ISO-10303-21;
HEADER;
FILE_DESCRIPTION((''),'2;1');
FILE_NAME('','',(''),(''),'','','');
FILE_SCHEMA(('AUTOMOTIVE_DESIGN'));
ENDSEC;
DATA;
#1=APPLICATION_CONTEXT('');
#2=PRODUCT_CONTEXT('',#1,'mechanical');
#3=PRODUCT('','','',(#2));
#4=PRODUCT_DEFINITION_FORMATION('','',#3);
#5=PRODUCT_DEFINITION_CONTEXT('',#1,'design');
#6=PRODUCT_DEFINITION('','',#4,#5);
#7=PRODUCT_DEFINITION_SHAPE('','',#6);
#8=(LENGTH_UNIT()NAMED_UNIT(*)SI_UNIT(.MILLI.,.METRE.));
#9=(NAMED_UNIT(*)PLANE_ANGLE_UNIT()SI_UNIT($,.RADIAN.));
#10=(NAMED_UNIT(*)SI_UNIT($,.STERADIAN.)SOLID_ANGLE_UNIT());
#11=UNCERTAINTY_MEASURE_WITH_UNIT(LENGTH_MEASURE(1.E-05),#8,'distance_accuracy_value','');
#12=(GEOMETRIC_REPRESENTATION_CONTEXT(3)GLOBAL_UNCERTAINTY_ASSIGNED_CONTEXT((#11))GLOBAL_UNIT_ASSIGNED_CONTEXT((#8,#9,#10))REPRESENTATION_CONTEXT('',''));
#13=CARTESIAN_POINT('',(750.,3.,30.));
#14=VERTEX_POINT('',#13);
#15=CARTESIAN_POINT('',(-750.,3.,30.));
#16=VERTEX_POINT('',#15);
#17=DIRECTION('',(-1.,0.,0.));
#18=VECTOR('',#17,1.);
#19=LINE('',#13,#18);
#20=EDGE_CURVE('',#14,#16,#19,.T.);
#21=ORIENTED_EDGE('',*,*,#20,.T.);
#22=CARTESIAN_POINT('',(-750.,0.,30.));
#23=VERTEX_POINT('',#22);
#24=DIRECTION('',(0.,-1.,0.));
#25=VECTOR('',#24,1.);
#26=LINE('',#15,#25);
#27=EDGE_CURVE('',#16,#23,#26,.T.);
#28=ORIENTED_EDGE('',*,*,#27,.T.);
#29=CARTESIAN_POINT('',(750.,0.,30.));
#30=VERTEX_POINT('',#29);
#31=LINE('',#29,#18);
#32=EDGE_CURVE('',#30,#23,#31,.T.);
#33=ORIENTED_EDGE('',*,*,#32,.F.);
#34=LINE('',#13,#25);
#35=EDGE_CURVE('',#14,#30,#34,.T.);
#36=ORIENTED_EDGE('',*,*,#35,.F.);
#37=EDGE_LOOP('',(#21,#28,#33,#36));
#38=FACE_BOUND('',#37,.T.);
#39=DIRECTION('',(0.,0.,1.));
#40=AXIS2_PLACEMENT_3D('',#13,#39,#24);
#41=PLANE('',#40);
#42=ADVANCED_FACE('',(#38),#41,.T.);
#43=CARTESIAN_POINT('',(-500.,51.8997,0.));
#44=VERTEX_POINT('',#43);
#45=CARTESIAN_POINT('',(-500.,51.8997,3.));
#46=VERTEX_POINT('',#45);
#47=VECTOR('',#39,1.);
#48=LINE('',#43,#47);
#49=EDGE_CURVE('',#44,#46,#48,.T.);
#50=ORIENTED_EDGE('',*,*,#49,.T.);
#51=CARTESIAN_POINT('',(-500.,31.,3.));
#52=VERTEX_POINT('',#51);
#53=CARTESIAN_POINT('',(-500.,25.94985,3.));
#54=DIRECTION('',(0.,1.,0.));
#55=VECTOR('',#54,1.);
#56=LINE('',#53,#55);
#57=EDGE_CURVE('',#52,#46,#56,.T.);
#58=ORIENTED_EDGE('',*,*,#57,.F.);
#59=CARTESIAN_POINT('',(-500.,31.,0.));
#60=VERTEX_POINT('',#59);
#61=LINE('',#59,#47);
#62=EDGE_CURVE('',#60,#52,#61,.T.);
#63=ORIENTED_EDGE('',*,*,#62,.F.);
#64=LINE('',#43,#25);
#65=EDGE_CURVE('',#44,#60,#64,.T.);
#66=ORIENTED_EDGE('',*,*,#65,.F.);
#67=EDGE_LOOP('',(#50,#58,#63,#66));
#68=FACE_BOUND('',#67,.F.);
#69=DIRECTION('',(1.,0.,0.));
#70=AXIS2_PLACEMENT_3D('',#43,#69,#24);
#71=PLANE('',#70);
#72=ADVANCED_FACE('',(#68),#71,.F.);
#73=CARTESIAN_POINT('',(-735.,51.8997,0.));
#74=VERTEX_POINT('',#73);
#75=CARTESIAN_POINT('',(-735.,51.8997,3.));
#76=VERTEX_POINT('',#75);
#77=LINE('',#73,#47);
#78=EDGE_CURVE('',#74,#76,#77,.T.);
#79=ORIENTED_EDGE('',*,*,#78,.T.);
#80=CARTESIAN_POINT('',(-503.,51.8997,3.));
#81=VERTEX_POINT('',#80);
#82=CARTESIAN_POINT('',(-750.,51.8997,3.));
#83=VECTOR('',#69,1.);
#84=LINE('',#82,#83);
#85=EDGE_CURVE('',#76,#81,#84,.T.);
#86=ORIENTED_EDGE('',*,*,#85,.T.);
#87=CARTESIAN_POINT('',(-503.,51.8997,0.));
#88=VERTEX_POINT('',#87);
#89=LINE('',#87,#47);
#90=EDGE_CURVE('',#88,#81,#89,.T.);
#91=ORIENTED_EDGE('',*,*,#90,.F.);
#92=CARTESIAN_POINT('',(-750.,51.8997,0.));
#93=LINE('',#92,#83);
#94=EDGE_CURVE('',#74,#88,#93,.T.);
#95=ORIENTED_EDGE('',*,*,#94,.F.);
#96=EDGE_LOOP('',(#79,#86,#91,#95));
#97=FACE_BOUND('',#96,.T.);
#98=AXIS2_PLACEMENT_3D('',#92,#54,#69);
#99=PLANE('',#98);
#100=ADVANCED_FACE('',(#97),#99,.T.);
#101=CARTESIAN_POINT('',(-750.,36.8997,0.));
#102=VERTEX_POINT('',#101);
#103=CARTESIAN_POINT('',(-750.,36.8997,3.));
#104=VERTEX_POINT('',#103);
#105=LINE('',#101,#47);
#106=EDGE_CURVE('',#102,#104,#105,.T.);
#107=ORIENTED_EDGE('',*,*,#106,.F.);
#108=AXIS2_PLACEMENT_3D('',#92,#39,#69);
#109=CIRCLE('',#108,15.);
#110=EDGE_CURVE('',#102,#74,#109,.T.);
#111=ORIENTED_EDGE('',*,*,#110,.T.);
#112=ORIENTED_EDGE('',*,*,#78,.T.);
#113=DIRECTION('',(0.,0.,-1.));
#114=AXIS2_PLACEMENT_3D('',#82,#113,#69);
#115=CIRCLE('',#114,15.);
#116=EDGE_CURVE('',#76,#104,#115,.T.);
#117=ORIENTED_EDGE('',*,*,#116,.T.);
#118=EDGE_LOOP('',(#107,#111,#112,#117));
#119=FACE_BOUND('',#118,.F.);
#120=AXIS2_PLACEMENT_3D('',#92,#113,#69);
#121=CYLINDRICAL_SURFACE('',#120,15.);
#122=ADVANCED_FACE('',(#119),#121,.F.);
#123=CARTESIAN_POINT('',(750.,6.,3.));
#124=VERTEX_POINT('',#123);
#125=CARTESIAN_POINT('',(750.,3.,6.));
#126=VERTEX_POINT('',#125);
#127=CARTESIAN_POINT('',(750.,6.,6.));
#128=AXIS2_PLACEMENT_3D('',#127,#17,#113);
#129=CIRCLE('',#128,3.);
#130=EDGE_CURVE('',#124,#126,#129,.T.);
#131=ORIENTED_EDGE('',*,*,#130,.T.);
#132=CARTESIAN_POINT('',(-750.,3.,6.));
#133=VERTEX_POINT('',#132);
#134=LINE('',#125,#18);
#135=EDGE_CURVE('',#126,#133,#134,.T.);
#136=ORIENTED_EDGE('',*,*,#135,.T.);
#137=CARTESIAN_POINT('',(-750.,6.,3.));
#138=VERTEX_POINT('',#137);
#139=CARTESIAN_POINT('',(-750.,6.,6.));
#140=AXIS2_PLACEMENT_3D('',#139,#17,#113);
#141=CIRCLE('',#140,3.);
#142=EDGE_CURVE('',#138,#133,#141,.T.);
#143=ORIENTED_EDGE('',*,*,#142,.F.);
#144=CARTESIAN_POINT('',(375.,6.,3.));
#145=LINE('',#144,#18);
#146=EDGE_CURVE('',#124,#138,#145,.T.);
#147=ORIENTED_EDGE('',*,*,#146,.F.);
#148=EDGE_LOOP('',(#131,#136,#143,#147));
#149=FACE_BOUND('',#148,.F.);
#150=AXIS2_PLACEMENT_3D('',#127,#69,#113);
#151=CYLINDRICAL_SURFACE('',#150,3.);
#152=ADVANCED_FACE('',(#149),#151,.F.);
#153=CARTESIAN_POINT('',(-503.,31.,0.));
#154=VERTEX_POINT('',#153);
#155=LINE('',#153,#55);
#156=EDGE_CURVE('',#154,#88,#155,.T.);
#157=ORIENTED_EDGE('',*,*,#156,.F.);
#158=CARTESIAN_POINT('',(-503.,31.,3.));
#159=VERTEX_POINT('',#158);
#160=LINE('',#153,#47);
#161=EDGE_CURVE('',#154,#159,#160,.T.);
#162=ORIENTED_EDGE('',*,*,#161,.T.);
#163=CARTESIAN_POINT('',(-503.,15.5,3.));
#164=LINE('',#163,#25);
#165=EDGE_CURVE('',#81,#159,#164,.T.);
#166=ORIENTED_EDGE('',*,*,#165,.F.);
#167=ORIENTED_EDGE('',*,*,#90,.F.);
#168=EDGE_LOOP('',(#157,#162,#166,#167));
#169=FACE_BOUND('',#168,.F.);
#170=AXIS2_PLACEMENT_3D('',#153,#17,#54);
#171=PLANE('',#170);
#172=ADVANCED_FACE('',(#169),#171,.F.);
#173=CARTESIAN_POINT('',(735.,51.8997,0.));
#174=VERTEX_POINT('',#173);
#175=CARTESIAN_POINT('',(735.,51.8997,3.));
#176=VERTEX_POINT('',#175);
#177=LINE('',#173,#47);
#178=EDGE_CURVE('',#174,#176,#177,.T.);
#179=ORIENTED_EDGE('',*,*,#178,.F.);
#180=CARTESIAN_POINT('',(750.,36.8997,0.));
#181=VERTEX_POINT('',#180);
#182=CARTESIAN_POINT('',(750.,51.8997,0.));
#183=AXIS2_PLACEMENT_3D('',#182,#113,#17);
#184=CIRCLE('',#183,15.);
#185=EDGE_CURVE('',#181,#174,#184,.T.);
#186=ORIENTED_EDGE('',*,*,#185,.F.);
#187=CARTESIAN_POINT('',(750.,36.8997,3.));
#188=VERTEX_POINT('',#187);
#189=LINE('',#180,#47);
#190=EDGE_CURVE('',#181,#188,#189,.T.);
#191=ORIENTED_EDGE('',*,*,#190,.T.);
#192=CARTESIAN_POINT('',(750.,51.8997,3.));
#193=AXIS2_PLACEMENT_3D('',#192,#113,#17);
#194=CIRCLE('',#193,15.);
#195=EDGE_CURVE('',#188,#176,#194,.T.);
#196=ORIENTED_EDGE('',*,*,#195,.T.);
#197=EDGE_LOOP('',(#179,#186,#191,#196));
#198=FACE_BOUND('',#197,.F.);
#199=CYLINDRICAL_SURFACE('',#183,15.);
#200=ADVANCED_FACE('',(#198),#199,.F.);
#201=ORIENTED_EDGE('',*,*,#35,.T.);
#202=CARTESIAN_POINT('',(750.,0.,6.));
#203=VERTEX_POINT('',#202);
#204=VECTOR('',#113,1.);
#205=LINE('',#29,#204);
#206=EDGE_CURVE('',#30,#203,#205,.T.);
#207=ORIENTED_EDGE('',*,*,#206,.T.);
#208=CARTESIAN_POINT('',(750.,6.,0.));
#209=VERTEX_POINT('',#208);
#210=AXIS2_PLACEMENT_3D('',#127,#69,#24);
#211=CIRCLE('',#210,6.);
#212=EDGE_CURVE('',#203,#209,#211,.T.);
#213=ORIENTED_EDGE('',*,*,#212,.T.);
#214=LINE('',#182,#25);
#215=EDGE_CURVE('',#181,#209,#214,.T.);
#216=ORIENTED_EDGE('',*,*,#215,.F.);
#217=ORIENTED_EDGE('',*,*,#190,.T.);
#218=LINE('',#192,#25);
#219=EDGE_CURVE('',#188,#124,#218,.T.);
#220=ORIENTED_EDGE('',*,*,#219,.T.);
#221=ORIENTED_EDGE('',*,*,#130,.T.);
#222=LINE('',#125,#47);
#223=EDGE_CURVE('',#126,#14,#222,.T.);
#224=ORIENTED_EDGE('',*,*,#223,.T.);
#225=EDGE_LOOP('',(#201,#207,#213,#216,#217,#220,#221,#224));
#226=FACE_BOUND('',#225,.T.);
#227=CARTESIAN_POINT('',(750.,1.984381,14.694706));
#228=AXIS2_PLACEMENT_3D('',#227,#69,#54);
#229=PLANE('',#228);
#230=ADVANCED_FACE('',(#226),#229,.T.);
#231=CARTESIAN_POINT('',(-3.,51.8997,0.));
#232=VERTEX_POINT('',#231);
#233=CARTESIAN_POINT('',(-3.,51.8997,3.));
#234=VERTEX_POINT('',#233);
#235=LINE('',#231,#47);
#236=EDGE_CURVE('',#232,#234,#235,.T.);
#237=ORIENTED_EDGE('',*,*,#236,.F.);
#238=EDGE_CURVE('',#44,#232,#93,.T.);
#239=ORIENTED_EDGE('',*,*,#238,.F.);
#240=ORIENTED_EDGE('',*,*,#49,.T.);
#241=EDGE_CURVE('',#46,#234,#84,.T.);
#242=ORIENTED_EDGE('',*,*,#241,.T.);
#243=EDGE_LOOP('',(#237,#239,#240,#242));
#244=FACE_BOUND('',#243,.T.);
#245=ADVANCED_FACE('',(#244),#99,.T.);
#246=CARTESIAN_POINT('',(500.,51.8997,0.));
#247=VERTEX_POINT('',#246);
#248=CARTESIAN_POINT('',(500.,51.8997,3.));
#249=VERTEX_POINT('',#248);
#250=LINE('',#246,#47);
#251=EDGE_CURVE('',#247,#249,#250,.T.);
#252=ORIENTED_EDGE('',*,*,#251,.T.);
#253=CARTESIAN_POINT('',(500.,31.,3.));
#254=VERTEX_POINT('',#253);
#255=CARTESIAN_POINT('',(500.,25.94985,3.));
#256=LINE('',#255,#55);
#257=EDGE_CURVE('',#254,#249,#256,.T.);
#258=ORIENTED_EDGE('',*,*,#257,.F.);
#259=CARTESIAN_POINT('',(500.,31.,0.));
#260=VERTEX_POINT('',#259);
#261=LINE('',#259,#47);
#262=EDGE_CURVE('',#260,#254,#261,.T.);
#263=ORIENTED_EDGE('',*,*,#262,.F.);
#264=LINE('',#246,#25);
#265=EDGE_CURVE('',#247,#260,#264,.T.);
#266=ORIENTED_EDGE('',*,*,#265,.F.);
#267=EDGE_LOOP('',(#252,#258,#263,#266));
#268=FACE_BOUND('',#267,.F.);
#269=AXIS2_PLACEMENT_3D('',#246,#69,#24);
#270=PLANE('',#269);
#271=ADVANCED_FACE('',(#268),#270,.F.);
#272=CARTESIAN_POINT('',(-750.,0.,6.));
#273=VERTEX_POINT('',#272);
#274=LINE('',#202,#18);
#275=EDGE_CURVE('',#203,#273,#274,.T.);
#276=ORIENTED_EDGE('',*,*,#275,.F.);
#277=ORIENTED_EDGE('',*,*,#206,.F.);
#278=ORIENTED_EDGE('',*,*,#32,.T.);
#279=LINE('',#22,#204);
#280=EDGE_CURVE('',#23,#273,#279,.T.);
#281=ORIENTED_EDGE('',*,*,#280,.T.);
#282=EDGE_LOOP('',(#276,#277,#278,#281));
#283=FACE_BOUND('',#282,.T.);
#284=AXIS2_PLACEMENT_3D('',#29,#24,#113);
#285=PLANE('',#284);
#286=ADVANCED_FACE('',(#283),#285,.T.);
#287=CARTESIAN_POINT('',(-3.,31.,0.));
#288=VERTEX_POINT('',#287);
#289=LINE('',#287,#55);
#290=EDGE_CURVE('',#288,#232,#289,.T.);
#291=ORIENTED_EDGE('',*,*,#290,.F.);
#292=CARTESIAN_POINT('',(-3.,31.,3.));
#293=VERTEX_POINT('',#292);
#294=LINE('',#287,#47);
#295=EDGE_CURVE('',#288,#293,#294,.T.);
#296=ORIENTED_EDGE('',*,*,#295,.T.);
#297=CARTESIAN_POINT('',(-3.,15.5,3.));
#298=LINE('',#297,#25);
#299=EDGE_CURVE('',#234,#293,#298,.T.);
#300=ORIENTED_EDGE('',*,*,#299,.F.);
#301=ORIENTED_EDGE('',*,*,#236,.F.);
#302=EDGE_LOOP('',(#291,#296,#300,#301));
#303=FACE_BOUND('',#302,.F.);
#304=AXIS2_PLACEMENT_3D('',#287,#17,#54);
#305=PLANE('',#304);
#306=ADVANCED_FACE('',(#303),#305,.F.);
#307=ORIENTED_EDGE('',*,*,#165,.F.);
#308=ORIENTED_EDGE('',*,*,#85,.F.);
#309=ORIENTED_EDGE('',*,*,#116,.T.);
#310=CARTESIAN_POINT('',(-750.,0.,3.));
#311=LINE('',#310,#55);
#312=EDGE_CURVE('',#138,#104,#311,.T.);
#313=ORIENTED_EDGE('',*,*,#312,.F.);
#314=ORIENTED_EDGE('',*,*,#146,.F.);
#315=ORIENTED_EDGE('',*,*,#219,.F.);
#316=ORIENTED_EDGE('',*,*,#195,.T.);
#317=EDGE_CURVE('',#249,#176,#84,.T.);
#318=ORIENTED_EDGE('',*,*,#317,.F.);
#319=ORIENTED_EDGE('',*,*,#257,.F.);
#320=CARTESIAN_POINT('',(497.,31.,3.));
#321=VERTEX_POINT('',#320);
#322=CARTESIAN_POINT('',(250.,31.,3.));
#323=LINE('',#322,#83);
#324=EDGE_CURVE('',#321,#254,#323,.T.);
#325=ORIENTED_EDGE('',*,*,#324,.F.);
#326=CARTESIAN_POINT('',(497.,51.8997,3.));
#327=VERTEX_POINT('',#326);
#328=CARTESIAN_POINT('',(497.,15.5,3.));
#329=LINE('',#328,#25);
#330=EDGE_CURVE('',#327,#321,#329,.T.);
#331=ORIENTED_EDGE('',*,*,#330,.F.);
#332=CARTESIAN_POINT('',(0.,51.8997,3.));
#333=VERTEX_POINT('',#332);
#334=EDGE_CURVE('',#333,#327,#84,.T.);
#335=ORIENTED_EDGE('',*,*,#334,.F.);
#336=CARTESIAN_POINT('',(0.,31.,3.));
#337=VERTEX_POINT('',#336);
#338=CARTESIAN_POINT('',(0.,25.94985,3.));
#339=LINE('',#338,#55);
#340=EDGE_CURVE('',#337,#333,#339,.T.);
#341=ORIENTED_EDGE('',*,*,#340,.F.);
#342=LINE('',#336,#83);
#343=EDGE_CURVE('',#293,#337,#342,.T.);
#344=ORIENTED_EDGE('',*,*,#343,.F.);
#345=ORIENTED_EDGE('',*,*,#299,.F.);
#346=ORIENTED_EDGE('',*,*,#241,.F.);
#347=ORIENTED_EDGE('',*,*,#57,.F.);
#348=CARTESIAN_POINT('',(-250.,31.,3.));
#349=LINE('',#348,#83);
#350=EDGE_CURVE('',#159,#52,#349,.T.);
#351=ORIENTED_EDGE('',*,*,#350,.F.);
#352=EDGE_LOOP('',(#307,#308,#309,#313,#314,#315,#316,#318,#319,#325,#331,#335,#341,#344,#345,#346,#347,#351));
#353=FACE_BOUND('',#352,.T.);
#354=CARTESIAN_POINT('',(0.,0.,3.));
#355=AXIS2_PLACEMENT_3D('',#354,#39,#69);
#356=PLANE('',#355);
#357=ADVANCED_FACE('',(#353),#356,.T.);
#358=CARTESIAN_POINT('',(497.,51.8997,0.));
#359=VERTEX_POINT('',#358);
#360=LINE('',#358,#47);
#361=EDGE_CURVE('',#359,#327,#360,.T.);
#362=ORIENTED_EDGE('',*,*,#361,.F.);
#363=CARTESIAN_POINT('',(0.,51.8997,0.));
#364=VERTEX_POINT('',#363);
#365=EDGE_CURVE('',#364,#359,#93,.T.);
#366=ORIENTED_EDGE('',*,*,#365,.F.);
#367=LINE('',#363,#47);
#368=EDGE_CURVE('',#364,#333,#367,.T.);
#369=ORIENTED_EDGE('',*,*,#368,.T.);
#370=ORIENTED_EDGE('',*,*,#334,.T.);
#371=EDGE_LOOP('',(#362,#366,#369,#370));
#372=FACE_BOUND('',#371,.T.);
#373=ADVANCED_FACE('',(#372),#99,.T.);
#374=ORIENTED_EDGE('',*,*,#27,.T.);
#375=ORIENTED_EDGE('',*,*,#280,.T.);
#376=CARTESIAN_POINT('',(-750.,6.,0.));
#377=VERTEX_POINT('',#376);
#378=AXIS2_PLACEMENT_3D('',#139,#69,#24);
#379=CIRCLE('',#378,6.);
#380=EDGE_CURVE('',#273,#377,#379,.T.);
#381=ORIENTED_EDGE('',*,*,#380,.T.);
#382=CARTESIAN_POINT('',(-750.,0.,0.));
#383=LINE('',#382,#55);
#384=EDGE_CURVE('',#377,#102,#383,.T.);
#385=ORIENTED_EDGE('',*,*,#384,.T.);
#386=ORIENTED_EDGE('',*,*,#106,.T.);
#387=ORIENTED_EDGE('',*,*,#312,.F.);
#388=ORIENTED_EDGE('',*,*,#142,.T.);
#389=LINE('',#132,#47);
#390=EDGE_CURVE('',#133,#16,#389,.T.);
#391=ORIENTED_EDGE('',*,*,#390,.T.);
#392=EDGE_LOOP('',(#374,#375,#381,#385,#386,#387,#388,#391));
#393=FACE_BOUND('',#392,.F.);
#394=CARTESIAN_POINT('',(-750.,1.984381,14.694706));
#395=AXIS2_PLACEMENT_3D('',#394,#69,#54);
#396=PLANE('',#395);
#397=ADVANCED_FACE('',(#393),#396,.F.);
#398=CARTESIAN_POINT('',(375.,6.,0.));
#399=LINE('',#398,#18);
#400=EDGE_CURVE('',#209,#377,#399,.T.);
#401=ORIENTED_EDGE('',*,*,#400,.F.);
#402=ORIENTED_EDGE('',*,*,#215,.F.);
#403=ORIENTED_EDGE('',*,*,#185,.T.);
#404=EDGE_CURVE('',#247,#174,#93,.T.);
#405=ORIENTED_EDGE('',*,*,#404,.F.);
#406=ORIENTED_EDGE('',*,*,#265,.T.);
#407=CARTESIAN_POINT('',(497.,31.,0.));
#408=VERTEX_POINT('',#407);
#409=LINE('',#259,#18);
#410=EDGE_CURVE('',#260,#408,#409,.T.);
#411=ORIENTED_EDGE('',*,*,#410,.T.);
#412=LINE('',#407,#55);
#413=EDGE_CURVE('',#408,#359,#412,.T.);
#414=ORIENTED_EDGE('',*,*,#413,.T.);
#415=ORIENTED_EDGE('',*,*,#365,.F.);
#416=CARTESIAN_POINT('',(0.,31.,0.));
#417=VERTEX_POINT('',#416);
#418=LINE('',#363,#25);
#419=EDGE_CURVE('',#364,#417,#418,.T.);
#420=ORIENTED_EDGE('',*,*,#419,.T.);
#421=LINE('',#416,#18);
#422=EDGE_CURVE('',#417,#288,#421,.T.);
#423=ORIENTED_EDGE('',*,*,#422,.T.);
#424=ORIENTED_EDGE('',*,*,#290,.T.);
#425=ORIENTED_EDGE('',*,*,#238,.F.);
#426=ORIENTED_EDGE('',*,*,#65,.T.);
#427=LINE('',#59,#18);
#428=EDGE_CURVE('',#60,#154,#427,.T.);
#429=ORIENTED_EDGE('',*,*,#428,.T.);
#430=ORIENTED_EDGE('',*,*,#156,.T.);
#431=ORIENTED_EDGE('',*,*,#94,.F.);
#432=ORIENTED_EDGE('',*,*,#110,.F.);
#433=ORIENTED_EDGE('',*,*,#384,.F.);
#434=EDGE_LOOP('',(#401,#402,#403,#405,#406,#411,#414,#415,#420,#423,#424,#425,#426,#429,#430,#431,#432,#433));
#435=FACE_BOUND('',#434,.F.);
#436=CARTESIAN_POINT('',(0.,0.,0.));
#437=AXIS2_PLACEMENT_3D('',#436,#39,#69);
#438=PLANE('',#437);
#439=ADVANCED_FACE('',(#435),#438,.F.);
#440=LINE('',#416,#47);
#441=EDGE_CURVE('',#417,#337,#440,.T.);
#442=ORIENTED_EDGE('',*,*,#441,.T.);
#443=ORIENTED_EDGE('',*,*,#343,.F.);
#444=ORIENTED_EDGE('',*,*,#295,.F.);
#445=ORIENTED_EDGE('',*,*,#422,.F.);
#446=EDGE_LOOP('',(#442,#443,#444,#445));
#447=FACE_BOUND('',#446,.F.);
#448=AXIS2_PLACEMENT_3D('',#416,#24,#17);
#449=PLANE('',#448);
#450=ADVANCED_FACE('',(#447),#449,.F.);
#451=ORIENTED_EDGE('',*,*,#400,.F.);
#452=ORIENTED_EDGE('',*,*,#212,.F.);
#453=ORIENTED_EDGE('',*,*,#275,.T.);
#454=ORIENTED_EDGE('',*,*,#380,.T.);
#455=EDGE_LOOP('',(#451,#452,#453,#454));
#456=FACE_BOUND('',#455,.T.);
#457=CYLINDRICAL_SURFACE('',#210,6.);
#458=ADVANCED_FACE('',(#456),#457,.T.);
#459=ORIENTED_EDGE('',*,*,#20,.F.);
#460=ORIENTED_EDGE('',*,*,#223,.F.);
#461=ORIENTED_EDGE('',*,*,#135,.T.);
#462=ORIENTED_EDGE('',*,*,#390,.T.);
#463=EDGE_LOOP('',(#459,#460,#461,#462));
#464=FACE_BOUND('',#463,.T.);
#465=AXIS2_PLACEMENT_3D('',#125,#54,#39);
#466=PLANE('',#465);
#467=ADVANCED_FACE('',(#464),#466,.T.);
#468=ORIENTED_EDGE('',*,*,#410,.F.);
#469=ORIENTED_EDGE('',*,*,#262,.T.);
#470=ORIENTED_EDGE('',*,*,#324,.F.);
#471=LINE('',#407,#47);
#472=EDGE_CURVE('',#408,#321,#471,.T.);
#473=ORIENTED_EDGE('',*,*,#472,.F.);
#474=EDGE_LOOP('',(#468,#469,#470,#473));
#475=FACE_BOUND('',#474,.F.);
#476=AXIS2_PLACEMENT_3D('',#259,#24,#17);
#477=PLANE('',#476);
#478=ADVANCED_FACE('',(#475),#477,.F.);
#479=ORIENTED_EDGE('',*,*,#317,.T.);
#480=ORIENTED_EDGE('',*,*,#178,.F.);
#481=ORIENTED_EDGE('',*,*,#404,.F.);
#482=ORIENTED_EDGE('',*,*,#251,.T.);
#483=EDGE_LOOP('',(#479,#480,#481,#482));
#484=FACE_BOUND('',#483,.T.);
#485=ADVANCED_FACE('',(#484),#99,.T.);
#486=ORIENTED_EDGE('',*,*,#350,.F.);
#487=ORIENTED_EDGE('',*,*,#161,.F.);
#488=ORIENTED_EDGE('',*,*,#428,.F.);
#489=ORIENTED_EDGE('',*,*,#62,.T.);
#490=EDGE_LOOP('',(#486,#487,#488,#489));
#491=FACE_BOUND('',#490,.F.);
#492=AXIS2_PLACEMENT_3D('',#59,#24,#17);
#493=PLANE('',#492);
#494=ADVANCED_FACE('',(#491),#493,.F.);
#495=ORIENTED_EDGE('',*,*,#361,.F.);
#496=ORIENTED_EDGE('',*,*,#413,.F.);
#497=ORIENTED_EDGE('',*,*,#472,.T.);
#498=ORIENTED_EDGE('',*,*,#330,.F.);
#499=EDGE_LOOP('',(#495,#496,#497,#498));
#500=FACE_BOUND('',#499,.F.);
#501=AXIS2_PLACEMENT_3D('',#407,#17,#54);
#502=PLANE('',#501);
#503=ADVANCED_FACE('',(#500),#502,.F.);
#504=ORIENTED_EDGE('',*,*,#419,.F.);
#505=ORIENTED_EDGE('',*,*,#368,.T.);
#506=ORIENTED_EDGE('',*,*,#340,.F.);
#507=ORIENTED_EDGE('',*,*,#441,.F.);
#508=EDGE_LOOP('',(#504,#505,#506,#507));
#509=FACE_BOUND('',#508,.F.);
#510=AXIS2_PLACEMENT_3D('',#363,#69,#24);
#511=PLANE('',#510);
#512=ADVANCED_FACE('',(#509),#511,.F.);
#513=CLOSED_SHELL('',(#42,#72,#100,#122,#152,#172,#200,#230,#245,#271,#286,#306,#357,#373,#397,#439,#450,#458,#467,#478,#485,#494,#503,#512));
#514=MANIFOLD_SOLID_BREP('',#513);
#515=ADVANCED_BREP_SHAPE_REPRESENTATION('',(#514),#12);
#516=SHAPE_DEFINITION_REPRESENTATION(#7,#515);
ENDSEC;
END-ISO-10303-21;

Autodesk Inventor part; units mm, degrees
ref_plane "YZ Plane" through (0, 0, 0) normal (1, 0, 0) x (0, 1, 0)
ref_plane "XZ Plane" through (0, 0, 0) normal (0, 1, 0) x (-1, 0, 0)
ref_plane "XY Plane" through (0, 0, 0) normal (0, 0, 1) x (1, 0, 0)
sketch "Sketch1" plane through (0, 0, 0) normal (0, 0, 1) x (1, 0, 0)
  line L0 (-750, 51.8997) -> (750, 51.8997)
  line L1 (750, 51.8997) -> (750, 0)
  line L2 (750, 0) -> (-750, 0)
  line L3 (-750, 0) -> (-750, 51.8997)
  point P0 (0, 0)
  point P1 (0, 0)
  dimension "d0" = 1500
  dimension "d1" = 51.8997
extrude "Plate1" add sketch "Sketch1" along normal blind 3
sketch "Sketch2" plane through (750, 3, 0) normal (0, -1, 0) x (1, 0, 0)
  line L0 (-1500, 0) -> (0, 0)
  line L1 (0, 0) -> (0, 30)
  line L2 (0, 30) -> (-1500, 30)
  line L3 (-1500, 30) -> (-1500, 0)
edge flange "Flange1" height 30 angle 90 thickness 3 bend radius 3 thickness toward (0, -1, 0) relief tear relief width 3 relief depth 1.5 edges at (0, 0, 3) wall of the first edge with corners at (-750, 3, 0) (750, 3, 0) (750, 3, 30) (-750, 3, 30)
bend "Bend1"
corner "Corner1"
sketch "Sketch5" plane through (0, 0, 0) normal (0, 0, -1) x (-1, 0, 0)
  line L0 (750, 51.8997) -> (-750, 51.8997) projected
  line L1 (500, 51.8997) -> (500, 31)
  line L2 (500, 31) -> (503, 31)
  line L3 (503, 31) -> (503, 51.8997)
  line L4 (750, 0) -> (-750, 0) projected
  point P0 (0, 0)
  dimension "d18" = 3
  dimension "d19" = 247
  dimension "d20" = 31
extrude "Extrusion1" cut sketch "Sketch5" against normal through all
pattern_linear "Rectangular Pattern1" count 3 spacing 500 along (1, 0, 0) of "Extrusion1"
sketch "Sketch6" plane through (0, 0, 0) normal (0, 0, -1) x (-1, 0, 0)
  line L0 (-750, 51.8997) -> (-750, 6) projected
  circle A0 centre (-750, 51.8997) radius 15
  line L1 (-750, 51.8997) -> (-500, 51.8997) projected
  point P0 (0, 0)
  point P1 (-735, 51.8997)
  point P2 (-750, 36.8997)
  dimension "d24" = 30
extrude "Extrusion2" cut sketch "Sketch6" against normal through all contours L1 A0 L0 picked at (-740.1254, 50.7871)
mirror "Mirror1" about plane through (0, 0, 0) normal (1, 0, 0) of "Extrusion2"
equation "\"d1\" = Стрингер_5"
equation "\"d18\" = Thickness"
equation "\"d2\" = Thickness"
equation "\"d3\" = BendReliefWidth"
equation "\"d4\" = BendReliefDepth"
equation "\"d5\" = MinimumRemnant"
equation "\"d6\" = TransitionRadius"
equation "\"d9\" = BendRadius"
equation "\"d10\" = CornerReliefSize"
equation "\"d11\" = GapSize"
equation "\"d12\" = JacobiRadiusSize"
equation "\"BendRadius\" = Thickness"
equation "\"BendReliefWidth\" = Thickness"
equation "\"BendReliefDepth\" = 0.5 * Thickness"
equation "\"CornerReliefSize\" = 4 * Thickness"
equation "\"MinimumRemnant\" = 2 * Thickness"
equation "\"TransitionRadius\" = BendRadius"
equation "\"JacobiRadiusSize\" = BendRadius"
equation "\"GapSize\" = Thickness"
equation "\"Стрингер_5\" = 51.899679"
equation "\"Thickness\" = 3"
properties part number "МОО 055 стрингер борт 51"
